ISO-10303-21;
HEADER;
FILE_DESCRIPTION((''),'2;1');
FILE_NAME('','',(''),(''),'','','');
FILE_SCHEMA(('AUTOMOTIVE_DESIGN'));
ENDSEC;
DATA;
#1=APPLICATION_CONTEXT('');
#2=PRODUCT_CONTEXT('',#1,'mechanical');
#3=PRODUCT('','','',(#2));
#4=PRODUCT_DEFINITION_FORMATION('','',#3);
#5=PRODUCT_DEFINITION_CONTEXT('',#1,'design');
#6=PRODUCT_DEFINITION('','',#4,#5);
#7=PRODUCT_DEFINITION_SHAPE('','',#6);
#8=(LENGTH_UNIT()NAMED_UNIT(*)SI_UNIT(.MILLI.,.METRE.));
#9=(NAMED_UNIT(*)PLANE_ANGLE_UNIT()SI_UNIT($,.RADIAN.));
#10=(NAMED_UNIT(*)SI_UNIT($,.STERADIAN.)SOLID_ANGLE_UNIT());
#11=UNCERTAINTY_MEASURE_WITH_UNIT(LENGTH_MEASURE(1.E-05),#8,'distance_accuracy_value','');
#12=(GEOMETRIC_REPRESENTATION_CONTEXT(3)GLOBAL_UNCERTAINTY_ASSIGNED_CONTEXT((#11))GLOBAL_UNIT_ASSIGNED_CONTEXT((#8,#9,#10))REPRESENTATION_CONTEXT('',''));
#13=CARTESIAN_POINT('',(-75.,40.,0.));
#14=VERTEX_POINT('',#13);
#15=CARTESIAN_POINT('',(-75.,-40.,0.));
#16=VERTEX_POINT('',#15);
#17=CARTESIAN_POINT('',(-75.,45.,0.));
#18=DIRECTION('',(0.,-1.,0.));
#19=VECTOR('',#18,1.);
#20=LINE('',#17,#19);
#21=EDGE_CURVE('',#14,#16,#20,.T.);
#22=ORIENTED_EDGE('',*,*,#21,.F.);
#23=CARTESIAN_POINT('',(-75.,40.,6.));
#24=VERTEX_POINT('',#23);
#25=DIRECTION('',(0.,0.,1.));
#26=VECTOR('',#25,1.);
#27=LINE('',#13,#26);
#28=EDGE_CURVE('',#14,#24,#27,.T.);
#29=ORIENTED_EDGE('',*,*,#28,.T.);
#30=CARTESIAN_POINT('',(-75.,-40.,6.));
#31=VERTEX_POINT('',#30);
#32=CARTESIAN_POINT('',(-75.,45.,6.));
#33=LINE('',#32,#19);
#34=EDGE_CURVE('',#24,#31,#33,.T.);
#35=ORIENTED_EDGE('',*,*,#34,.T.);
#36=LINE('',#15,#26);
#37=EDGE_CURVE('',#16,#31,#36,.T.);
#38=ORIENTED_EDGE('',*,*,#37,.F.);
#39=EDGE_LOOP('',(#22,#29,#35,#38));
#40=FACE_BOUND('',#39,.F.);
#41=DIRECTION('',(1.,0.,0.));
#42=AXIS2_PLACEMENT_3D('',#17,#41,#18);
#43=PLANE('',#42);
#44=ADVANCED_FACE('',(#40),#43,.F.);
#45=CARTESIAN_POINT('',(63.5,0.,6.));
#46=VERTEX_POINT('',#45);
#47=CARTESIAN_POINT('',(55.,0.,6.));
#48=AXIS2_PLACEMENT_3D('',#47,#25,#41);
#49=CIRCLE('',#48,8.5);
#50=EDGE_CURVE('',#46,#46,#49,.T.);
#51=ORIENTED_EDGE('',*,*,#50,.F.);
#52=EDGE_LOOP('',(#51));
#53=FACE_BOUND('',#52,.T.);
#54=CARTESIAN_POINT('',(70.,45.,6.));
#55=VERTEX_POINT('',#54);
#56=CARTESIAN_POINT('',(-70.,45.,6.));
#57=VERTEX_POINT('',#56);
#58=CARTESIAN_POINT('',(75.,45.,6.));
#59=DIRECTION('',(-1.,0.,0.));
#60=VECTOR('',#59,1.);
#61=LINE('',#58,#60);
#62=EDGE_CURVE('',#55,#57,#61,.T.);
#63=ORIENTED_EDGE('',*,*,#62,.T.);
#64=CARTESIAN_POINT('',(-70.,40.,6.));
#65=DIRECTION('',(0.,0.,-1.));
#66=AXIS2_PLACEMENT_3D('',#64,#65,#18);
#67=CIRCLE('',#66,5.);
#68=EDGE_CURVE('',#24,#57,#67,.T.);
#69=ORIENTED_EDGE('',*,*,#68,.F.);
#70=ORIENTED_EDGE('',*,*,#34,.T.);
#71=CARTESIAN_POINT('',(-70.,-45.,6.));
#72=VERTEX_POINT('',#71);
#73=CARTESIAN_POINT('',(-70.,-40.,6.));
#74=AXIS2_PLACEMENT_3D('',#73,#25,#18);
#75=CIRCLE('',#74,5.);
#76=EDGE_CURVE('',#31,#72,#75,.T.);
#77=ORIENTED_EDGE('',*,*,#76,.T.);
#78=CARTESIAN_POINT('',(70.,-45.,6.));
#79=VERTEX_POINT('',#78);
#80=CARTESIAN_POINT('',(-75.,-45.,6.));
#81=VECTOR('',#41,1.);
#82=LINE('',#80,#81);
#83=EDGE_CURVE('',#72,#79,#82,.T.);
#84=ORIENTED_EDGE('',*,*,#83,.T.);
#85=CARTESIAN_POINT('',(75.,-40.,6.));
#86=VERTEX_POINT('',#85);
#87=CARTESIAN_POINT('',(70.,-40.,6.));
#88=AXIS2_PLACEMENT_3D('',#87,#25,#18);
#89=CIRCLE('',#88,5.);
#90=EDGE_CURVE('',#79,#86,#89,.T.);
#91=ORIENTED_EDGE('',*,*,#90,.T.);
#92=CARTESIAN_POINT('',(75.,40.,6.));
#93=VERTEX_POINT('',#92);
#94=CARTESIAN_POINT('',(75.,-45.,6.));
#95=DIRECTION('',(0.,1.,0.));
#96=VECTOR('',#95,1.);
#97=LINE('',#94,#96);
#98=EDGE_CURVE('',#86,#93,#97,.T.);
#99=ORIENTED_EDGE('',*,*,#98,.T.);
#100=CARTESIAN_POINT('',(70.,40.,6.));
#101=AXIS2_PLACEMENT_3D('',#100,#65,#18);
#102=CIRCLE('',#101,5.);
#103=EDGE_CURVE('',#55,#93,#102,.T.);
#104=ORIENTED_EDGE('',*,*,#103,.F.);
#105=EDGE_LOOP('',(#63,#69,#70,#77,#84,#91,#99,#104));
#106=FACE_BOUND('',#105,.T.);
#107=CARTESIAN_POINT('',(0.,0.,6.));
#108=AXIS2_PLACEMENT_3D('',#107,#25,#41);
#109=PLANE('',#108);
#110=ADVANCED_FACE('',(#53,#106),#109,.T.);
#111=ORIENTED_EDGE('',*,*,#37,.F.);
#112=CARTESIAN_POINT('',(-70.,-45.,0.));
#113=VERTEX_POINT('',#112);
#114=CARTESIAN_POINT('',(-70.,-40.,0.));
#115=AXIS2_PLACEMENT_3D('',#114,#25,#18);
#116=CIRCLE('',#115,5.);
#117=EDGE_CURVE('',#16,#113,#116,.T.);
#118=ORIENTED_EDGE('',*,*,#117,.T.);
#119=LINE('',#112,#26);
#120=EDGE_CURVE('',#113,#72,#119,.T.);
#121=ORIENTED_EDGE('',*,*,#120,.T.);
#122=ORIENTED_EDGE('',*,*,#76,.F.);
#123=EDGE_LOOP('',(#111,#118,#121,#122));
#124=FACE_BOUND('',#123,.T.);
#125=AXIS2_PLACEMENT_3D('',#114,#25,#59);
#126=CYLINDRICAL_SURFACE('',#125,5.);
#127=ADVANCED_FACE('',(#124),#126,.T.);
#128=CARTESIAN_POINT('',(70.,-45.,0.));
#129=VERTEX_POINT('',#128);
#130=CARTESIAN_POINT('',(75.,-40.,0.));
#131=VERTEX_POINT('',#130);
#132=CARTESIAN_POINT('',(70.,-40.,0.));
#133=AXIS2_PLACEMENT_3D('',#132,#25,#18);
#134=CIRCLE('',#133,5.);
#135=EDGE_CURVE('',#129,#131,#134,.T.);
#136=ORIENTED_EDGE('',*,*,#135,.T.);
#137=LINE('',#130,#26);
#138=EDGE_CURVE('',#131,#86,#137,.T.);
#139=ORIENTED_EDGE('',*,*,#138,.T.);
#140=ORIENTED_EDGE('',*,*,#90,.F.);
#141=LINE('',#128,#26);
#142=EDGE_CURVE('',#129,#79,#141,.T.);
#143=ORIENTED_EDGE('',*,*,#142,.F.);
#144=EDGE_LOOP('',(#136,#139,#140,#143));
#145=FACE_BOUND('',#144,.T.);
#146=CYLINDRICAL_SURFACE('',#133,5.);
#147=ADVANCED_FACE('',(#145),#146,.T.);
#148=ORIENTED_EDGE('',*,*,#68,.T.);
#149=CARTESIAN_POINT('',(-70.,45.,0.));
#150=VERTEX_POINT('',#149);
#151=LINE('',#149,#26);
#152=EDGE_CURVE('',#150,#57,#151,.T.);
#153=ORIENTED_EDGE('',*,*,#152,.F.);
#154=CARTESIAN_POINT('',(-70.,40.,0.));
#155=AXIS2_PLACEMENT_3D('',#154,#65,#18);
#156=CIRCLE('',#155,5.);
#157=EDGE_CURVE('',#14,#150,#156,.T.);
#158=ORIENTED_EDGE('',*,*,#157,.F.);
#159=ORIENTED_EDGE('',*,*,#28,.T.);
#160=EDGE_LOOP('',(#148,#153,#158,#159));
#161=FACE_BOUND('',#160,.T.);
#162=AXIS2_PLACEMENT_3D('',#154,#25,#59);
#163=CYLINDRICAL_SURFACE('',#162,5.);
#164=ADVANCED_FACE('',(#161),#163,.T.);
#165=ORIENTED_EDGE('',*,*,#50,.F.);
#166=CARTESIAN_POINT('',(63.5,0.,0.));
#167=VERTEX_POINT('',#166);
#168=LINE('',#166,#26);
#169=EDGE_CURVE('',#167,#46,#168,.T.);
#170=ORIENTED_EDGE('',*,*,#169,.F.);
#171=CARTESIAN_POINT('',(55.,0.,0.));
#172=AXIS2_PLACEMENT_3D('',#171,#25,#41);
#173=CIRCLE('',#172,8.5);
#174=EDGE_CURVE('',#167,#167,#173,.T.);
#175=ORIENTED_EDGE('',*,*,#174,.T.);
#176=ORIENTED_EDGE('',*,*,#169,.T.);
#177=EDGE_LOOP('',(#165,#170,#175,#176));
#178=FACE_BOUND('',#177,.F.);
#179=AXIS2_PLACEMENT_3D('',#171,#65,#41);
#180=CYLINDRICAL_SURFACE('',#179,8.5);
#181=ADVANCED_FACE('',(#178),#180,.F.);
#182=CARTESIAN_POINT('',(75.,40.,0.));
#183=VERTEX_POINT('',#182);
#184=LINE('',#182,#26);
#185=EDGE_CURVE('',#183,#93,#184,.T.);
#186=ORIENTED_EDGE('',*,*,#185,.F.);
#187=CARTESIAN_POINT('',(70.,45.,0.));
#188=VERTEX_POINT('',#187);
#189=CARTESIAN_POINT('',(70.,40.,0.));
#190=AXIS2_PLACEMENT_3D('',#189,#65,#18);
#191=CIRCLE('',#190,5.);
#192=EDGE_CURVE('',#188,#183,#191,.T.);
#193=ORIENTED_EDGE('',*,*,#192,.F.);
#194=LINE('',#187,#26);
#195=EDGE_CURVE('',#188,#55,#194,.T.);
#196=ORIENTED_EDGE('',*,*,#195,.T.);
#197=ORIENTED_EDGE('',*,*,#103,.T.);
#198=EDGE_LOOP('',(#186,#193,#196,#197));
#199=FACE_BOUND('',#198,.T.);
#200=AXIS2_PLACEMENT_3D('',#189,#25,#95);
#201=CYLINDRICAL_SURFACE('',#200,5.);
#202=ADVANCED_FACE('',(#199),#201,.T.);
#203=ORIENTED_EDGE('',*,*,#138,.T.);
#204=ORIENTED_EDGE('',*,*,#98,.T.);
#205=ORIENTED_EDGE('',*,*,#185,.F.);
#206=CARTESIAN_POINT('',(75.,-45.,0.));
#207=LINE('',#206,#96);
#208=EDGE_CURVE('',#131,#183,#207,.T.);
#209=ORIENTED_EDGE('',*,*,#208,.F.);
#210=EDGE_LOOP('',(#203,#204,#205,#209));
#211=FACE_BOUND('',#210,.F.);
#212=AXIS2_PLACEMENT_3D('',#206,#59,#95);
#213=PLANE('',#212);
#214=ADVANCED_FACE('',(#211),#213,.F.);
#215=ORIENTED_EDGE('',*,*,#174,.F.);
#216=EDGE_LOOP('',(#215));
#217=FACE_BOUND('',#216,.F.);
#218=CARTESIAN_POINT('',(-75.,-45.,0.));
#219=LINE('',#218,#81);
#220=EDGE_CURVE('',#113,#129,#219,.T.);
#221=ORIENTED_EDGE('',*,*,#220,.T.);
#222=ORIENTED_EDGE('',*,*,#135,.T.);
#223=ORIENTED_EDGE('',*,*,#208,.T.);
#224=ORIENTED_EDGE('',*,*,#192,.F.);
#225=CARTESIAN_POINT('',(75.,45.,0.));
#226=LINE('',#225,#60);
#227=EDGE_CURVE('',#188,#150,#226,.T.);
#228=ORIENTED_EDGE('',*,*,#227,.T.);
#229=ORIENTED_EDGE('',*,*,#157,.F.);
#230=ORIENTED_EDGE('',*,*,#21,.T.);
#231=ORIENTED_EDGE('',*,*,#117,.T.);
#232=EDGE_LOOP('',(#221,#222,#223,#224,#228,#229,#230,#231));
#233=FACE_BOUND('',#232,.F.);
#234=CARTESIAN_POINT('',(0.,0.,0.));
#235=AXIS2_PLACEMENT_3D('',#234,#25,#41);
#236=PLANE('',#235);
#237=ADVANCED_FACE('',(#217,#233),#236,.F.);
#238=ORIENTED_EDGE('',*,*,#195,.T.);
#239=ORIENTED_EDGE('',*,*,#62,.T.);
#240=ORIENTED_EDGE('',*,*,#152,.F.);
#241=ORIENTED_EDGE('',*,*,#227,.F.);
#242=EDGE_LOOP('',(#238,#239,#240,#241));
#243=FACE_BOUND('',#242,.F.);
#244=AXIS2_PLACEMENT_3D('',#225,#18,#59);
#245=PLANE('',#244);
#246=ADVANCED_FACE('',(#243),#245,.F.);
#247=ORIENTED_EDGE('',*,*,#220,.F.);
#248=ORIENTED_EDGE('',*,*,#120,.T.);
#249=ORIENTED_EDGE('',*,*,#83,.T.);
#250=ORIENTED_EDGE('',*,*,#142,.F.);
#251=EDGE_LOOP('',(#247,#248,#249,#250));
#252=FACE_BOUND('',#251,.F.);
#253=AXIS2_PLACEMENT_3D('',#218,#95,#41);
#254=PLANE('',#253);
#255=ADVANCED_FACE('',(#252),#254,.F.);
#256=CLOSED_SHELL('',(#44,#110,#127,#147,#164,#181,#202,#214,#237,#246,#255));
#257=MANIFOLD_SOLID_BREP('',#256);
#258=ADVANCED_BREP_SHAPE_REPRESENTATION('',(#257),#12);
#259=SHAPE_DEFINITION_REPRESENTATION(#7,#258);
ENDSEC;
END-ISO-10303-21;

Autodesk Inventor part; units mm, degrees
ref_plane "YZ Plane" through (0, 0, 0) normal (1, 0, 0) x (0, 1, 0)
ref_plane "XZ Plane" through (0, 0, 0) normal (0, 1, 0) x (-1, 0, 0)
ref_plane "XY Plane" through (0, 0, 0) normal (0, 0, 1) x (1, 0, 0)
sketch "Sketch1" plane through (0, 0, 0) normal (0, 0, 1) x (1, 0, 0)
  line L0 (-75, -45) -> (75, -45)
  line L1 (75, -45) -> (75, 45)
  line L2 (75, 45) -> (-75, 45)
  line L3 (-75, 45) -> (-75, -45)
  line L4 (-75, -45) -> (75, 45) construction
  line L5 (75, -45) -> (-75, 45) construction
  circle A0 centre (55, -25) radius 8.5
  circle A1 centre (55, 25) radius 8.5
  line L6 (0, 0) -> (75, 0) construction
  circle A2 centre (55, 0) radius 8.5
  dimension "d0" = 150
  dimension "d1" = 90
  dimension "d23" = 17
  dimension "d25" = 20
  dimension "d26" = 20
extrude "Plate1" add sketch "Sketch1" along normal blind 6 contours L3 L2 L1 L0 | A0 | A1
fillet "Corner Round2" radius 5 4 edges at (-75, 45, 3) (-75, -45, 3) (75, -45, 3) (75, 45, 3)
equation "\"d26\" = d25"
equation "\"d2\" = Thickness"
equation "\"BendReliefWidth\" = Thickness"
equation "\"BendReliefDepth\" = 0.5 * Thickness"
equation "\"CornerReliefSize\" = 4 * Thickness"
equation "\"MinimumRemnant\" = 2 * Thickness"
equation "\"TransitionRadius\" = BendRadius"
equation "\"JacobiRadiusSize\" = BendRadius"
equation "\"GapSize\" = Thickness"
equation "\"Thickness\" = 6"
equation "\"BendRadius\" = 5"
properties part number "PRS 9695 leg floor plate_1200" material "Stainless Steel"
